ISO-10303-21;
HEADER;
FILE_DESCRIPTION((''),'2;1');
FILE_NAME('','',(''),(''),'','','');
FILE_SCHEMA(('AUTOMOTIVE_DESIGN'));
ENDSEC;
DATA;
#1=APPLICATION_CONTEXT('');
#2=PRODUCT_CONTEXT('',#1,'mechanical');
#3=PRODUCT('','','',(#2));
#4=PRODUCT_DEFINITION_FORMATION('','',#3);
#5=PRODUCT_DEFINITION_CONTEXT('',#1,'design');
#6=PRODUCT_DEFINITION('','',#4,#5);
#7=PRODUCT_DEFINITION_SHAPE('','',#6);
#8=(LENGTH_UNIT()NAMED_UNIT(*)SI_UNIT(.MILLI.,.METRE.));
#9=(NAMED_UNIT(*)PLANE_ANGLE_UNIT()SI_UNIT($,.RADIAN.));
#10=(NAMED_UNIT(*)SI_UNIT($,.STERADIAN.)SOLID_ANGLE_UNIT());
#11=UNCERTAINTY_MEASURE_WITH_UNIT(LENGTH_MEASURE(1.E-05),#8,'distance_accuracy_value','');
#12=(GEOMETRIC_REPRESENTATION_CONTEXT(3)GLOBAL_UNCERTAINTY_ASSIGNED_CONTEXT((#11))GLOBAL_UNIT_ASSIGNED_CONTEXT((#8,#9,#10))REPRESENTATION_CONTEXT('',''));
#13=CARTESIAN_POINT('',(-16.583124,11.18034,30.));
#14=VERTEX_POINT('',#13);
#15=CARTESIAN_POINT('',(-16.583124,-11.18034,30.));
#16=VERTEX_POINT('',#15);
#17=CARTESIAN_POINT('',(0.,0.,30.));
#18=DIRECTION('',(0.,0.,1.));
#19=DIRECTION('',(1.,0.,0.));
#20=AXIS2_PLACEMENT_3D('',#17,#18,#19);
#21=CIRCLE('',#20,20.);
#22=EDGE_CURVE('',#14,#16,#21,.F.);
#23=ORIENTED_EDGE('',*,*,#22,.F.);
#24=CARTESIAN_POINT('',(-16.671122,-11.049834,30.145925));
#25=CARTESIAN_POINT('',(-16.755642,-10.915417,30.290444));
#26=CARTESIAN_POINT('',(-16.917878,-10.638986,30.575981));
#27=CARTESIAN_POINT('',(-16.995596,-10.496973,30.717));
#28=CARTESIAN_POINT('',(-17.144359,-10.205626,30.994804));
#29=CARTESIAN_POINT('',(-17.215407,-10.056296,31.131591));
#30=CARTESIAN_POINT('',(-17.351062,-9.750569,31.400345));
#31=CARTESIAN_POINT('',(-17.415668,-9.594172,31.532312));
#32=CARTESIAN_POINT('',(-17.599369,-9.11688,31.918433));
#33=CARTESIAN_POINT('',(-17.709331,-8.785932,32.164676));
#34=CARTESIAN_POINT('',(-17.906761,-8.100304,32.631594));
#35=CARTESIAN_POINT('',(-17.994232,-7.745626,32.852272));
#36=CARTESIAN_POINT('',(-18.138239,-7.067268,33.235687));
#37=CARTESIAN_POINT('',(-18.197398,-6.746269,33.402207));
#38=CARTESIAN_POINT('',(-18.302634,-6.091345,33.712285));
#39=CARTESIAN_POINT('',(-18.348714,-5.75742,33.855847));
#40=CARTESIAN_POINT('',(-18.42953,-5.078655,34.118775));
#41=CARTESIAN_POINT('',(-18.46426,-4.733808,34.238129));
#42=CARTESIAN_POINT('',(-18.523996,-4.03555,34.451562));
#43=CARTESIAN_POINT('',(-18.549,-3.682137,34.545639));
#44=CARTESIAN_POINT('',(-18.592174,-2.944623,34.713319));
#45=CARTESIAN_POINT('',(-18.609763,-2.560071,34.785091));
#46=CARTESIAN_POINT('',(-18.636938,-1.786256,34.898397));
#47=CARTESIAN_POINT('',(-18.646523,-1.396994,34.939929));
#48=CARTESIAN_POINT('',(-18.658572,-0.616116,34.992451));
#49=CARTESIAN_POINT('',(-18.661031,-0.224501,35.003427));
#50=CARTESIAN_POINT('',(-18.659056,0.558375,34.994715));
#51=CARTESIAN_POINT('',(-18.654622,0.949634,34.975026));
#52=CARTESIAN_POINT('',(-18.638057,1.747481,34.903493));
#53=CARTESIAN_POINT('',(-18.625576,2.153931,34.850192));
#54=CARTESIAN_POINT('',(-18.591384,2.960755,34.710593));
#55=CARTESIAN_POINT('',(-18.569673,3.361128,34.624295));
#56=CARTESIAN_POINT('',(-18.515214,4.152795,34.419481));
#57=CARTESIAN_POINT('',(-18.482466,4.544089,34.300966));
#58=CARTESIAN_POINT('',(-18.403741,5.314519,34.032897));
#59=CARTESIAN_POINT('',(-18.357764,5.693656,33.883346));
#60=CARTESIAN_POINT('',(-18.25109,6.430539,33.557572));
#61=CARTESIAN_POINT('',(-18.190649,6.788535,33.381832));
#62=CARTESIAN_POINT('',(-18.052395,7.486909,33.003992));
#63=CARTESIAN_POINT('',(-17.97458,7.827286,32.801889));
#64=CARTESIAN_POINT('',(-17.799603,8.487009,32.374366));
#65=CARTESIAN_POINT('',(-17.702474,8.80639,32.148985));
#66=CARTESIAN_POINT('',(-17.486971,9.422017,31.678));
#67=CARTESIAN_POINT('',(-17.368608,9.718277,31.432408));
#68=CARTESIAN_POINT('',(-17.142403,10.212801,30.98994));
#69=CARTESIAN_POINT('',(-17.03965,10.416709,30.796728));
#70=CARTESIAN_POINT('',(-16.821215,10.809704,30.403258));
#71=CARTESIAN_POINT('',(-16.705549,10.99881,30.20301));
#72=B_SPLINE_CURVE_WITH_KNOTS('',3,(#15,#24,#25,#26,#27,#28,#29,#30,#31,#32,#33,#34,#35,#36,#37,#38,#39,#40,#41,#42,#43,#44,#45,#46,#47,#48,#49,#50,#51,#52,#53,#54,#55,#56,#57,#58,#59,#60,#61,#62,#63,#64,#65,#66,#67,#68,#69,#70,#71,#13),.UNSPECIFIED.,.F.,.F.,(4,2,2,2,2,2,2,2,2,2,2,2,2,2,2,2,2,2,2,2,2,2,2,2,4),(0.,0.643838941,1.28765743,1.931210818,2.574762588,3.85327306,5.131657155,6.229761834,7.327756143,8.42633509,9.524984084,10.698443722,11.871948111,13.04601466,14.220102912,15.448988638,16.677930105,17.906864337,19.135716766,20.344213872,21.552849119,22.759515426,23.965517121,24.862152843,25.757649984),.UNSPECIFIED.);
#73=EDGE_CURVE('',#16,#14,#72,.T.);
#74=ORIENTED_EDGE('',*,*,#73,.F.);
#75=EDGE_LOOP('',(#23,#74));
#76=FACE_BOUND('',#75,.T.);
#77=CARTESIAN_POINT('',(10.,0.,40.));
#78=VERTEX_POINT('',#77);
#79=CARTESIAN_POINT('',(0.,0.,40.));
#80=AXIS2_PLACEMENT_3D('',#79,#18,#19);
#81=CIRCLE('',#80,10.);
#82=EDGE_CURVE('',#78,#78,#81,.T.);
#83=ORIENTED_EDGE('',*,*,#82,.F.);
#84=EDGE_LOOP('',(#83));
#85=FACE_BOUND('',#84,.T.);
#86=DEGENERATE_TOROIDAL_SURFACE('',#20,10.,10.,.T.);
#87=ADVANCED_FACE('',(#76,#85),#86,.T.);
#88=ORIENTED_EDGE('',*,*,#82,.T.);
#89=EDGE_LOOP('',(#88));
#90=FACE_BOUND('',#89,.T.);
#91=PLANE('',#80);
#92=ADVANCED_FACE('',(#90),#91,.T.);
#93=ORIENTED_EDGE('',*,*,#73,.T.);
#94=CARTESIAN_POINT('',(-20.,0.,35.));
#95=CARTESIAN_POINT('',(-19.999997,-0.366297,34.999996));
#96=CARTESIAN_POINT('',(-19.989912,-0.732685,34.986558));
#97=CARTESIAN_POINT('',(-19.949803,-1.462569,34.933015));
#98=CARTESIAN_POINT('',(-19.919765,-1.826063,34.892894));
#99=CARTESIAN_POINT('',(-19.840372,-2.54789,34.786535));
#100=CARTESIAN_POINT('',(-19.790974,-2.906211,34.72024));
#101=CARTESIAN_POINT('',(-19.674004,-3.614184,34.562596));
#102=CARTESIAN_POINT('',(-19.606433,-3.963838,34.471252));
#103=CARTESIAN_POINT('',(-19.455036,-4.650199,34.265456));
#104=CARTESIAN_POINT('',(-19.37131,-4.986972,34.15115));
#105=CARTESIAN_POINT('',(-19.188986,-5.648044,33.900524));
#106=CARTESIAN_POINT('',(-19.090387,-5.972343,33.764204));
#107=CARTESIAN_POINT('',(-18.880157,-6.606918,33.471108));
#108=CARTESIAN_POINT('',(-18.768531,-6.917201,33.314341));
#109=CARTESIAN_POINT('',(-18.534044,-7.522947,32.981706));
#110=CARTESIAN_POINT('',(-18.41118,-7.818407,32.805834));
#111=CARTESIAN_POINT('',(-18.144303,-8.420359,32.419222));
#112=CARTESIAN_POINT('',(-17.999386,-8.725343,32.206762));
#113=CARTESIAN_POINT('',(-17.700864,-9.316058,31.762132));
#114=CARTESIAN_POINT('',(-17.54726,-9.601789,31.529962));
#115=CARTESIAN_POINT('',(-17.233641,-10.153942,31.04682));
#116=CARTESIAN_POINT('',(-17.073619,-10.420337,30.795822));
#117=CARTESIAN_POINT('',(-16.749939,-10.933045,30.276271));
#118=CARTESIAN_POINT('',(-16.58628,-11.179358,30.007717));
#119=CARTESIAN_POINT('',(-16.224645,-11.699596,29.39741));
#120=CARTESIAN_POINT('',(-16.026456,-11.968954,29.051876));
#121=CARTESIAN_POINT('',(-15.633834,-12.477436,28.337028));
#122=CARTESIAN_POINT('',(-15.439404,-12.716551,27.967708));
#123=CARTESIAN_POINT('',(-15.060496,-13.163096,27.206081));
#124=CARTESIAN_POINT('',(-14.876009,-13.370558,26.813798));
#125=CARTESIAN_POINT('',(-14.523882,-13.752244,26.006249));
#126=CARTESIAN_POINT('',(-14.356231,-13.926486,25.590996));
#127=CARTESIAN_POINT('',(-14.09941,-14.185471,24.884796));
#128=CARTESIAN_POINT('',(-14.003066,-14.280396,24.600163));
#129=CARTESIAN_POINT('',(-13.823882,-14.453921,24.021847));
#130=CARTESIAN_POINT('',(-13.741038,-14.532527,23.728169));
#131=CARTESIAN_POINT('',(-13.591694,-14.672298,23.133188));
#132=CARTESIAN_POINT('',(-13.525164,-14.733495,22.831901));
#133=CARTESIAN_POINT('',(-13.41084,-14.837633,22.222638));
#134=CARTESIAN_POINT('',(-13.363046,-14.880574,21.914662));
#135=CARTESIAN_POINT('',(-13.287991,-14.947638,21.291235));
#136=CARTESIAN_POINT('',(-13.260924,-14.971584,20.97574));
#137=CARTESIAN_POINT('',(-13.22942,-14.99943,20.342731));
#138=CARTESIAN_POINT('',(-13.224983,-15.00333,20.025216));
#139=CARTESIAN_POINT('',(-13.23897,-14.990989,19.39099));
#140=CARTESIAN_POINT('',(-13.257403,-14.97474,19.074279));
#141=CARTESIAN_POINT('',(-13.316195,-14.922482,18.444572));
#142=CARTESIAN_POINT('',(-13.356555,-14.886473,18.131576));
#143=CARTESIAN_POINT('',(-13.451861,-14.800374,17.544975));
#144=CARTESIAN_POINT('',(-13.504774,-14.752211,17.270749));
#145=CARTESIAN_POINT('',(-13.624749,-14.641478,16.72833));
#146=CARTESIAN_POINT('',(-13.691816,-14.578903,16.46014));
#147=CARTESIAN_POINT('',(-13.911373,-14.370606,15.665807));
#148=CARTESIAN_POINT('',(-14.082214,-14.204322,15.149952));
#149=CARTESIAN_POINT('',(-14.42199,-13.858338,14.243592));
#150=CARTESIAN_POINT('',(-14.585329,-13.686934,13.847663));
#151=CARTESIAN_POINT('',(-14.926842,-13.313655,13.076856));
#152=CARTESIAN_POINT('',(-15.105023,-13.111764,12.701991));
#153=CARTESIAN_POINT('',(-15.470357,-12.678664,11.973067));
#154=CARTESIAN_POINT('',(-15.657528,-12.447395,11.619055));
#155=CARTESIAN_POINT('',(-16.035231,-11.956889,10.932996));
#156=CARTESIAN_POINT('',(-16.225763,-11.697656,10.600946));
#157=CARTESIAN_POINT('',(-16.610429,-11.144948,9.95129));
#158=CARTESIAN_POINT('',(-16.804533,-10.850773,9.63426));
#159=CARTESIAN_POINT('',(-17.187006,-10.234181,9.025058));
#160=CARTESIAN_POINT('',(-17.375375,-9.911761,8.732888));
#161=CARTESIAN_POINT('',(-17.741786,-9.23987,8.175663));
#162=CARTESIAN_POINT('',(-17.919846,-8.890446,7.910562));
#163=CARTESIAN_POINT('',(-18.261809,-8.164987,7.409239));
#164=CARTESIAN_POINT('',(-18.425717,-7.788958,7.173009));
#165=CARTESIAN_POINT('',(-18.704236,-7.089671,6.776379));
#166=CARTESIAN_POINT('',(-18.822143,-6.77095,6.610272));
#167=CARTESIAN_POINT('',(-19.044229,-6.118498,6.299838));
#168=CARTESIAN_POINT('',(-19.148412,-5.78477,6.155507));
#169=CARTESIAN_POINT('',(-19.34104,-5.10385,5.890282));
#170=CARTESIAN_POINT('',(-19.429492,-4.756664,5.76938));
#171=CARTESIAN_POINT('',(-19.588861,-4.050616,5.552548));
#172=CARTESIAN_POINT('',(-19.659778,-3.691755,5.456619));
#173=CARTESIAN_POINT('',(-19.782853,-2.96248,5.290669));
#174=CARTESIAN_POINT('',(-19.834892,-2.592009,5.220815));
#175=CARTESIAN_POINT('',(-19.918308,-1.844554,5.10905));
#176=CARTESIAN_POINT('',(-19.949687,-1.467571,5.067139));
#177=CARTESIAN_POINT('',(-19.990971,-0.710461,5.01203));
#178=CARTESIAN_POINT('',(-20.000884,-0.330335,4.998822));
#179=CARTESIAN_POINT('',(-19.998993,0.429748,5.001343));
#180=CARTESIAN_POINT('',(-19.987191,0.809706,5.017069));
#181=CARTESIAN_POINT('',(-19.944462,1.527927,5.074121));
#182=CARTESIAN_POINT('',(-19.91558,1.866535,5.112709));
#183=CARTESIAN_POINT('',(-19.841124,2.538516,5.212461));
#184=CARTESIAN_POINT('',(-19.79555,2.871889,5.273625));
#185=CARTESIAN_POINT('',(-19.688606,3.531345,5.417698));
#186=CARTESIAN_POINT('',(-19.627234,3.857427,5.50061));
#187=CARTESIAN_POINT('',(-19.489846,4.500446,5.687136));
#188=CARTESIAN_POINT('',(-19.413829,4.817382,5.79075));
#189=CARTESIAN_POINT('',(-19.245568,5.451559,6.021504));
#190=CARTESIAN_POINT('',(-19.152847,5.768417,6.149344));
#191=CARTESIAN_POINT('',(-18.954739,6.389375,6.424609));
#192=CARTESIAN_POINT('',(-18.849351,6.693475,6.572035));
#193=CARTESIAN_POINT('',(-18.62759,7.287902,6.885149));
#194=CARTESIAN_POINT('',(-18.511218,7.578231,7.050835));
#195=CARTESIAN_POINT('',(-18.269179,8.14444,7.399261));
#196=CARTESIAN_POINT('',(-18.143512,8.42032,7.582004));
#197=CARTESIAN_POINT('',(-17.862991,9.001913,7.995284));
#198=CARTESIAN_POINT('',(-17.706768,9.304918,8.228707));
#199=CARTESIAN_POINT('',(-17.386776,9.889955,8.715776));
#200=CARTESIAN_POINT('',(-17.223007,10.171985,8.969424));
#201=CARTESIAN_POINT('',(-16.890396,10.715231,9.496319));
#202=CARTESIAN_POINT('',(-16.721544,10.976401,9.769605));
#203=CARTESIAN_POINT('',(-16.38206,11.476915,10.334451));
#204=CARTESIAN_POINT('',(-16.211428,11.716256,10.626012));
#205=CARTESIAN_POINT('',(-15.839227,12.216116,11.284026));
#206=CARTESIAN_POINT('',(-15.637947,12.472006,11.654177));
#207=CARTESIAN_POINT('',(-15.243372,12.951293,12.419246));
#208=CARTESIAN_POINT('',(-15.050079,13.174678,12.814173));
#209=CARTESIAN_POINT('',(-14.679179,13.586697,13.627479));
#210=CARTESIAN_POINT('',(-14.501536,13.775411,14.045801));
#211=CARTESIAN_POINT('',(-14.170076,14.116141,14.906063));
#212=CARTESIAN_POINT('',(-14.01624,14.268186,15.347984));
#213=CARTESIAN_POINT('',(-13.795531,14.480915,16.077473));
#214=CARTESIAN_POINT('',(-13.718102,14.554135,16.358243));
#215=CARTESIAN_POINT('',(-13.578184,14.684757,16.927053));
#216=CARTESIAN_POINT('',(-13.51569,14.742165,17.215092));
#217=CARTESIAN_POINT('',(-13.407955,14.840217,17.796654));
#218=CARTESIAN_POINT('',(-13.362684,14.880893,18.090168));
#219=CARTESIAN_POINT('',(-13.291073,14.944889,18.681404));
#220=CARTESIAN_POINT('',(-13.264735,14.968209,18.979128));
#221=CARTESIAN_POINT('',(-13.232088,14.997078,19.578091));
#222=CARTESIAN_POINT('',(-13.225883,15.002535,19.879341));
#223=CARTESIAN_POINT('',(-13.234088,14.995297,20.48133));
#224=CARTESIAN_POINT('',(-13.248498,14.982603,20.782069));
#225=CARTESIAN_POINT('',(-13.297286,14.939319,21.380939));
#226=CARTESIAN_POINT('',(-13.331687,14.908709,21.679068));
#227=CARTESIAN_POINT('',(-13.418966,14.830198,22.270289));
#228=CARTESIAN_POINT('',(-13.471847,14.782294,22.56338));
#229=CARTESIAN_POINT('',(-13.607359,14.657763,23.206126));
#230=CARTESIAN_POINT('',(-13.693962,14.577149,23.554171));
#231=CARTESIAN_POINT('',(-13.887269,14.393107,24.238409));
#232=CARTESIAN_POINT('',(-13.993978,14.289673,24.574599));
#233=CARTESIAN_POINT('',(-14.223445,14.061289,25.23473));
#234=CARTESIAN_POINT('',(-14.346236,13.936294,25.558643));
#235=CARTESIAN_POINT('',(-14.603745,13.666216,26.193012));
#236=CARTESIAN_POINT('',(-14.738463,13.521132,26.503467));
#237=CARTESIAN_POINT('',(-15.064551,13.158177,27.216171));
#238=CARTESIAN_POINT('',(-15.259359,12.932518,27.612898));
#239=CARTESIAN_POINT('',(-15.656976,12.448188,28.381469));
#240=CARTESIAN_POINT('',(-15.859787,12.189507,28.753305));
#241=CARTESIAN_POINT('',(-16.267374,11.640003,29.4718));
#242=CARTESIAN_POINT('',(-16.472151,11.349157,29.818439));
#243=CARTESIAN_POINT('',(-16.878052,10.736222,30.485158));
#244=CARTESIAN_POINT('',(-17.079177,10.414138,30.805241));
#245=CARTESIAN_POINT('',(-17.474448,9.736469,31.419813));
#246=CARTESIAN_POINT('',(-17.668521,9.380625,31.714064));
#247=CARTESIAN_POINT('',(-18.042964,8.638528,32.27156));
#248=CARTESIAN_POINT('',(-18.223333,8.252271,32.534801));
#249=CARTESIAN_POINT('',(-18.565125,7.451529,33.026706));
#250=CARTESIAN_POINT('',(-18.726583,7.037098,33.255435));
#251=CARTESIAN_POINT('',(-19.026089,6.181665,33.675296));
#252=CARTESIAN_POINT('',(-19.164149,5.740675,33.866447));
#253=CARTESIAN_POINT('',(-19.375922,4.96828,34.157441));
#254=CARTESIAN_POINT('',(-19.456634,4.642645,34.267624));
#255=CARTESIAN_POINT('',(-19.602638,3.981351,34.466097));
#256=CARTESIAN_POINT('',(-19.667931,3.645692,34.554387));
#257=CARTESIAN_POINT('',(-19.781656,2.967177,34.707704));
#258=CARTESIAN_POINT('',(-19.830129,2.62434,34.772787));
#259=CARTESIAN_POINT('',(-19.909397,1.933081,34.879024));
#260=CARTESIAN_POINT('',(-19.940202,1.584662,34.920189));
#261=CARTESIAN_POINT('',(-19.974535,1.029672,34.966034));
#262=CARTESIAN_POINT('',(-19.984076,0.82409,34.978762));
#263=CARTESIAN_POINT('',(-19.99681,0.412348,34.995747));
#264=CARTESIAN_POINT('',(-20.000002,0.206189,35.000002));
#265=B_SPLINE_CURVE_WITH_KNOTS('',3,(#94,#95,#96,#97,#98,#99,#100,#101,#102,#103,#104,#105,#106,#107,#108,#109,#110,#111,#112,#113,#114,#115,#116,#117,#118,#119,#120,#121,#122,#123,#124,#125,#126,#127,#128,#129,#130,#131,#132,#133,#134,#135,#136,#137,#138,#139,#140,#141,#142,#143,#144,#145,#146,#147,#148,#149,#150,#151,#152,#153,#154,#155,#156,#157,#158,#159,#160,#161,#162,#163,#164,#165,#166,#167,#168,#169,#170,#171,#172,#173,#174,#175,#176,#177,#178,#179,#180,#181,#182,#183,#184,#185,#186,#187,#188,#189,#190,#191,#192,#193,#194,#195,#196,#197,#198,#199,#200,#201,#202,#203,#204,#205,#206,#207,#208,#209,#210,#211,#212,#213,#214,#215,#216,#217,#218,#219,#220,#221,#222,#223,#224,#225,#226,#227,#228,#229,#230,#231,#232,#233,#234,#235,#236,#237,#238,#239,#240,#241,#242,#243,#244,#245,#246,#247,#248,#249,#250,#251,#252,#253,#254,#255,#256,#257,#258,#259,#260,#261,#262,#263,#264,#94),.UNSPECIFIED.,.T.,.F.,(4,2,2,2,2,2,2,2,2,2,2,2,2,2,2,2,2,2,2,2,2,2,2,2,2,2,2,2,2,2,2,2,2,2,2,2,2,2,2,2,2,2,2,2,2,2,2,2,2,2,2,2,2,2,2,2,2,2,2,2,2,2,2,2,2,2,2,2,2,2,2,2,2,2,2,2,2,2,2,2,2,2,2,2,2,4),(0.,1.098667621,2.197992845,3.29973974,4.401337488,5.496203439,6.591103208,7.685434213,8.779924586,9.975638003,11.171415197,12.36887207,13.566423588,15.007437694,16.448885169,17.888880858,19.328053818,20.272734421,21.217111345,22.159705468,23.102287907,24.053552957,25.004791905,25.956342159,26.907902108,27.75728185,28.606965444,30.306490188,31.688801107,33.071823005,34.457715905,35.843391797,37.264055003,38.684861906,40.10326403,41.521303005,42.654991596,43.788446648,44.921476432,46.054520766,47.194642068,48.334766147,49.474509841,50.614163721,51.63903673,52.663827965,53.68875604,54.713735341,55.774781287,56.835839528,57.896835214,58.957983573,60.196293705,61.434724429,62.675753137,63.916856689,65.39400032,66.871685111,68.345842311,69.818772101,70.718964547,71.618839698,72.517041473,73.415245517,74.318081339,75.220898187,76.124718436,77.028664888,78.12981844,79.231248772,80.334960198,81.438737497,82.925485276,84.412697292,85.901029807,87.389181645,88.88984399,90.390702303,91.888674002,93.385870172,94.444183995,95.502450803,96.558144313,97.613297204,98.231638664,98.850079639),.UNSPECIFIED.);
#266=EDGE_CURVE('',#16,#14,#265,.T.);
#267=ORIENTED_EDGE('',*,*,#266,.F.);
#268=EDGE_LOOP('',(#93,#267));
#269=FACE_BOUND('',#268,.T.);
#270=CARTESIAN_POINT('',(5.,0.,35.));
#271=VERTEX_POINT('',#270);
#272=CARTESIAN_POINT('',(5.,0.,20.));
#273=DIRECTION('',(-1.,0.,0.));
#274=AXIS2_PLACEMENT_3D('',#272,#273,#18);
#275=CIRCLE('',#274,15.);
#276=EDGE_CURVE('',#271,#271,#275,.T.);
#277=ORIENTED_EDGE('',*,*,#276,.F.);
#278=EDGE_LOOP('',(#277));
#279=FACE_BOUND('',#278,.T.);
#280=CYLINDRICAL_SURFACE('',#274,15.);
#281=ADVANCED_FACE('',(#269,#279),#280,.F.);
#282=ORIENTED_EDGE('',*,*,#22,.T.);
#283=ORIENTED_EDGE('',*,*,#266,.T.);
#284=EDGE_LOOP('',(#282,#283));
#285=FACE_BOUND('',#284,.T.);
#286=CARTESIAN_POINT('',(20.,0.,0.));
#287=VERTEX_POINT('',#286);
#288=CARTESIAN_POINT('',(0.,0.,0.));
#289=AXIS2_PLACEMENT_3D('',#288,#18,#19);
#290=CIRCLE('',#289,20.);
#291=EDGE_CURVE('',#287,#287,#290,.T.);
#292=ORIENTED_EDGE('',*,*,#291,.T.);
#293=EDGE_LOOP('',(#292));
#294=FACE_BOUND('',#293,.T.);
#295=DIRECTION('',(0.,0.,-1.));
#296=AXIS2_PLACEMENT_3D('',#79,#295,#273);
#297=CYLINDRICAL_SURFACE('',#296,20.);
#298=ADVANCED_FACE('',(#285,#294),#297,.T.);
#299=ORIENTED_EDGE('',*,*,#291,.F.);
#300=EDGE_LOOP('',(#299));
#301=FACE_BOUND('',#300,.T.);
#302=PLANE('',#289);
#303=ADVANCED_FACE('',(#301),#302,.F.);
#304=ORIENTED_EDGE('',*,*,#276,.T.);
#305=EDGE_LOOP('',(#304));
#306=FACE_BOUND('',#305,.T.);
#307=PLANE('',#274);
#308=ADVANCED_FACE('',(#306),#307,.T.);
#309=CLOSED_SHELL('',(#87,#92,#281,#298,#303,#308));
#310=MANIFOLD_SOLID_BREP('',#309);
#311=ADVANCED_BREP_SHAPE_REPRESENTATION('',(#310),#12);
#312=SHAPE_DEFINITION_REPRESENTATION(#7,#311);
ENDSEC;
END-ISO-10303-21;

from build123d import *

# Parameters (mm, degrees)
SKETCH1_R           = 20
BOSS_EXTRUDE1_DEPTH = 40
SKETCH2_R           = 15
CUT_EXTRUDE1_DEPTH  = 25
FILLET1_R           = 10


with BuildPart() as part:
    # Sketch1 → Boss-Extrude1 (new body)
    with BuildSketch(Plane.XY):
        Circle(SKETCH1_R)
    extrude(amount=BOSS_EXTRUDE1_DEPTH)

    # Sketch2 → Cut-Extrude1 (cut)
    with BuildSketch(Plane.ZY.offset(20)):
        with Locations((20, 0)):
            Circle(SKETCH2_R)
    extrude(amount=-CUT_EXTRUDE1_DEPTH, mode=Mode.SUBTRACT)

    # Fillet1
    # the kernel refuses this fillet: 10 mm, written as the material it takes off along each edge
    with BuildSketch(Plane(origin=(0, 0, 40), x_dir=(1, 0, 0), z_dir=(0, -1, 0))) as fillet1_piece_1:
        with BuildLine():
            CenterArc((20 - FILLET1_R, -FILLET1_R), FILLET1_R, 0, 90)
            Line((20 - FILLET1_R, 0), (20, 0))
            Line((20, 0), (20, -FILLET1_R))
        make_face()
    revolve(axis=Axis((0, 0, 40), (0, 0, 1)), mode=Mode.SUBTRACT)


solid = part.part
